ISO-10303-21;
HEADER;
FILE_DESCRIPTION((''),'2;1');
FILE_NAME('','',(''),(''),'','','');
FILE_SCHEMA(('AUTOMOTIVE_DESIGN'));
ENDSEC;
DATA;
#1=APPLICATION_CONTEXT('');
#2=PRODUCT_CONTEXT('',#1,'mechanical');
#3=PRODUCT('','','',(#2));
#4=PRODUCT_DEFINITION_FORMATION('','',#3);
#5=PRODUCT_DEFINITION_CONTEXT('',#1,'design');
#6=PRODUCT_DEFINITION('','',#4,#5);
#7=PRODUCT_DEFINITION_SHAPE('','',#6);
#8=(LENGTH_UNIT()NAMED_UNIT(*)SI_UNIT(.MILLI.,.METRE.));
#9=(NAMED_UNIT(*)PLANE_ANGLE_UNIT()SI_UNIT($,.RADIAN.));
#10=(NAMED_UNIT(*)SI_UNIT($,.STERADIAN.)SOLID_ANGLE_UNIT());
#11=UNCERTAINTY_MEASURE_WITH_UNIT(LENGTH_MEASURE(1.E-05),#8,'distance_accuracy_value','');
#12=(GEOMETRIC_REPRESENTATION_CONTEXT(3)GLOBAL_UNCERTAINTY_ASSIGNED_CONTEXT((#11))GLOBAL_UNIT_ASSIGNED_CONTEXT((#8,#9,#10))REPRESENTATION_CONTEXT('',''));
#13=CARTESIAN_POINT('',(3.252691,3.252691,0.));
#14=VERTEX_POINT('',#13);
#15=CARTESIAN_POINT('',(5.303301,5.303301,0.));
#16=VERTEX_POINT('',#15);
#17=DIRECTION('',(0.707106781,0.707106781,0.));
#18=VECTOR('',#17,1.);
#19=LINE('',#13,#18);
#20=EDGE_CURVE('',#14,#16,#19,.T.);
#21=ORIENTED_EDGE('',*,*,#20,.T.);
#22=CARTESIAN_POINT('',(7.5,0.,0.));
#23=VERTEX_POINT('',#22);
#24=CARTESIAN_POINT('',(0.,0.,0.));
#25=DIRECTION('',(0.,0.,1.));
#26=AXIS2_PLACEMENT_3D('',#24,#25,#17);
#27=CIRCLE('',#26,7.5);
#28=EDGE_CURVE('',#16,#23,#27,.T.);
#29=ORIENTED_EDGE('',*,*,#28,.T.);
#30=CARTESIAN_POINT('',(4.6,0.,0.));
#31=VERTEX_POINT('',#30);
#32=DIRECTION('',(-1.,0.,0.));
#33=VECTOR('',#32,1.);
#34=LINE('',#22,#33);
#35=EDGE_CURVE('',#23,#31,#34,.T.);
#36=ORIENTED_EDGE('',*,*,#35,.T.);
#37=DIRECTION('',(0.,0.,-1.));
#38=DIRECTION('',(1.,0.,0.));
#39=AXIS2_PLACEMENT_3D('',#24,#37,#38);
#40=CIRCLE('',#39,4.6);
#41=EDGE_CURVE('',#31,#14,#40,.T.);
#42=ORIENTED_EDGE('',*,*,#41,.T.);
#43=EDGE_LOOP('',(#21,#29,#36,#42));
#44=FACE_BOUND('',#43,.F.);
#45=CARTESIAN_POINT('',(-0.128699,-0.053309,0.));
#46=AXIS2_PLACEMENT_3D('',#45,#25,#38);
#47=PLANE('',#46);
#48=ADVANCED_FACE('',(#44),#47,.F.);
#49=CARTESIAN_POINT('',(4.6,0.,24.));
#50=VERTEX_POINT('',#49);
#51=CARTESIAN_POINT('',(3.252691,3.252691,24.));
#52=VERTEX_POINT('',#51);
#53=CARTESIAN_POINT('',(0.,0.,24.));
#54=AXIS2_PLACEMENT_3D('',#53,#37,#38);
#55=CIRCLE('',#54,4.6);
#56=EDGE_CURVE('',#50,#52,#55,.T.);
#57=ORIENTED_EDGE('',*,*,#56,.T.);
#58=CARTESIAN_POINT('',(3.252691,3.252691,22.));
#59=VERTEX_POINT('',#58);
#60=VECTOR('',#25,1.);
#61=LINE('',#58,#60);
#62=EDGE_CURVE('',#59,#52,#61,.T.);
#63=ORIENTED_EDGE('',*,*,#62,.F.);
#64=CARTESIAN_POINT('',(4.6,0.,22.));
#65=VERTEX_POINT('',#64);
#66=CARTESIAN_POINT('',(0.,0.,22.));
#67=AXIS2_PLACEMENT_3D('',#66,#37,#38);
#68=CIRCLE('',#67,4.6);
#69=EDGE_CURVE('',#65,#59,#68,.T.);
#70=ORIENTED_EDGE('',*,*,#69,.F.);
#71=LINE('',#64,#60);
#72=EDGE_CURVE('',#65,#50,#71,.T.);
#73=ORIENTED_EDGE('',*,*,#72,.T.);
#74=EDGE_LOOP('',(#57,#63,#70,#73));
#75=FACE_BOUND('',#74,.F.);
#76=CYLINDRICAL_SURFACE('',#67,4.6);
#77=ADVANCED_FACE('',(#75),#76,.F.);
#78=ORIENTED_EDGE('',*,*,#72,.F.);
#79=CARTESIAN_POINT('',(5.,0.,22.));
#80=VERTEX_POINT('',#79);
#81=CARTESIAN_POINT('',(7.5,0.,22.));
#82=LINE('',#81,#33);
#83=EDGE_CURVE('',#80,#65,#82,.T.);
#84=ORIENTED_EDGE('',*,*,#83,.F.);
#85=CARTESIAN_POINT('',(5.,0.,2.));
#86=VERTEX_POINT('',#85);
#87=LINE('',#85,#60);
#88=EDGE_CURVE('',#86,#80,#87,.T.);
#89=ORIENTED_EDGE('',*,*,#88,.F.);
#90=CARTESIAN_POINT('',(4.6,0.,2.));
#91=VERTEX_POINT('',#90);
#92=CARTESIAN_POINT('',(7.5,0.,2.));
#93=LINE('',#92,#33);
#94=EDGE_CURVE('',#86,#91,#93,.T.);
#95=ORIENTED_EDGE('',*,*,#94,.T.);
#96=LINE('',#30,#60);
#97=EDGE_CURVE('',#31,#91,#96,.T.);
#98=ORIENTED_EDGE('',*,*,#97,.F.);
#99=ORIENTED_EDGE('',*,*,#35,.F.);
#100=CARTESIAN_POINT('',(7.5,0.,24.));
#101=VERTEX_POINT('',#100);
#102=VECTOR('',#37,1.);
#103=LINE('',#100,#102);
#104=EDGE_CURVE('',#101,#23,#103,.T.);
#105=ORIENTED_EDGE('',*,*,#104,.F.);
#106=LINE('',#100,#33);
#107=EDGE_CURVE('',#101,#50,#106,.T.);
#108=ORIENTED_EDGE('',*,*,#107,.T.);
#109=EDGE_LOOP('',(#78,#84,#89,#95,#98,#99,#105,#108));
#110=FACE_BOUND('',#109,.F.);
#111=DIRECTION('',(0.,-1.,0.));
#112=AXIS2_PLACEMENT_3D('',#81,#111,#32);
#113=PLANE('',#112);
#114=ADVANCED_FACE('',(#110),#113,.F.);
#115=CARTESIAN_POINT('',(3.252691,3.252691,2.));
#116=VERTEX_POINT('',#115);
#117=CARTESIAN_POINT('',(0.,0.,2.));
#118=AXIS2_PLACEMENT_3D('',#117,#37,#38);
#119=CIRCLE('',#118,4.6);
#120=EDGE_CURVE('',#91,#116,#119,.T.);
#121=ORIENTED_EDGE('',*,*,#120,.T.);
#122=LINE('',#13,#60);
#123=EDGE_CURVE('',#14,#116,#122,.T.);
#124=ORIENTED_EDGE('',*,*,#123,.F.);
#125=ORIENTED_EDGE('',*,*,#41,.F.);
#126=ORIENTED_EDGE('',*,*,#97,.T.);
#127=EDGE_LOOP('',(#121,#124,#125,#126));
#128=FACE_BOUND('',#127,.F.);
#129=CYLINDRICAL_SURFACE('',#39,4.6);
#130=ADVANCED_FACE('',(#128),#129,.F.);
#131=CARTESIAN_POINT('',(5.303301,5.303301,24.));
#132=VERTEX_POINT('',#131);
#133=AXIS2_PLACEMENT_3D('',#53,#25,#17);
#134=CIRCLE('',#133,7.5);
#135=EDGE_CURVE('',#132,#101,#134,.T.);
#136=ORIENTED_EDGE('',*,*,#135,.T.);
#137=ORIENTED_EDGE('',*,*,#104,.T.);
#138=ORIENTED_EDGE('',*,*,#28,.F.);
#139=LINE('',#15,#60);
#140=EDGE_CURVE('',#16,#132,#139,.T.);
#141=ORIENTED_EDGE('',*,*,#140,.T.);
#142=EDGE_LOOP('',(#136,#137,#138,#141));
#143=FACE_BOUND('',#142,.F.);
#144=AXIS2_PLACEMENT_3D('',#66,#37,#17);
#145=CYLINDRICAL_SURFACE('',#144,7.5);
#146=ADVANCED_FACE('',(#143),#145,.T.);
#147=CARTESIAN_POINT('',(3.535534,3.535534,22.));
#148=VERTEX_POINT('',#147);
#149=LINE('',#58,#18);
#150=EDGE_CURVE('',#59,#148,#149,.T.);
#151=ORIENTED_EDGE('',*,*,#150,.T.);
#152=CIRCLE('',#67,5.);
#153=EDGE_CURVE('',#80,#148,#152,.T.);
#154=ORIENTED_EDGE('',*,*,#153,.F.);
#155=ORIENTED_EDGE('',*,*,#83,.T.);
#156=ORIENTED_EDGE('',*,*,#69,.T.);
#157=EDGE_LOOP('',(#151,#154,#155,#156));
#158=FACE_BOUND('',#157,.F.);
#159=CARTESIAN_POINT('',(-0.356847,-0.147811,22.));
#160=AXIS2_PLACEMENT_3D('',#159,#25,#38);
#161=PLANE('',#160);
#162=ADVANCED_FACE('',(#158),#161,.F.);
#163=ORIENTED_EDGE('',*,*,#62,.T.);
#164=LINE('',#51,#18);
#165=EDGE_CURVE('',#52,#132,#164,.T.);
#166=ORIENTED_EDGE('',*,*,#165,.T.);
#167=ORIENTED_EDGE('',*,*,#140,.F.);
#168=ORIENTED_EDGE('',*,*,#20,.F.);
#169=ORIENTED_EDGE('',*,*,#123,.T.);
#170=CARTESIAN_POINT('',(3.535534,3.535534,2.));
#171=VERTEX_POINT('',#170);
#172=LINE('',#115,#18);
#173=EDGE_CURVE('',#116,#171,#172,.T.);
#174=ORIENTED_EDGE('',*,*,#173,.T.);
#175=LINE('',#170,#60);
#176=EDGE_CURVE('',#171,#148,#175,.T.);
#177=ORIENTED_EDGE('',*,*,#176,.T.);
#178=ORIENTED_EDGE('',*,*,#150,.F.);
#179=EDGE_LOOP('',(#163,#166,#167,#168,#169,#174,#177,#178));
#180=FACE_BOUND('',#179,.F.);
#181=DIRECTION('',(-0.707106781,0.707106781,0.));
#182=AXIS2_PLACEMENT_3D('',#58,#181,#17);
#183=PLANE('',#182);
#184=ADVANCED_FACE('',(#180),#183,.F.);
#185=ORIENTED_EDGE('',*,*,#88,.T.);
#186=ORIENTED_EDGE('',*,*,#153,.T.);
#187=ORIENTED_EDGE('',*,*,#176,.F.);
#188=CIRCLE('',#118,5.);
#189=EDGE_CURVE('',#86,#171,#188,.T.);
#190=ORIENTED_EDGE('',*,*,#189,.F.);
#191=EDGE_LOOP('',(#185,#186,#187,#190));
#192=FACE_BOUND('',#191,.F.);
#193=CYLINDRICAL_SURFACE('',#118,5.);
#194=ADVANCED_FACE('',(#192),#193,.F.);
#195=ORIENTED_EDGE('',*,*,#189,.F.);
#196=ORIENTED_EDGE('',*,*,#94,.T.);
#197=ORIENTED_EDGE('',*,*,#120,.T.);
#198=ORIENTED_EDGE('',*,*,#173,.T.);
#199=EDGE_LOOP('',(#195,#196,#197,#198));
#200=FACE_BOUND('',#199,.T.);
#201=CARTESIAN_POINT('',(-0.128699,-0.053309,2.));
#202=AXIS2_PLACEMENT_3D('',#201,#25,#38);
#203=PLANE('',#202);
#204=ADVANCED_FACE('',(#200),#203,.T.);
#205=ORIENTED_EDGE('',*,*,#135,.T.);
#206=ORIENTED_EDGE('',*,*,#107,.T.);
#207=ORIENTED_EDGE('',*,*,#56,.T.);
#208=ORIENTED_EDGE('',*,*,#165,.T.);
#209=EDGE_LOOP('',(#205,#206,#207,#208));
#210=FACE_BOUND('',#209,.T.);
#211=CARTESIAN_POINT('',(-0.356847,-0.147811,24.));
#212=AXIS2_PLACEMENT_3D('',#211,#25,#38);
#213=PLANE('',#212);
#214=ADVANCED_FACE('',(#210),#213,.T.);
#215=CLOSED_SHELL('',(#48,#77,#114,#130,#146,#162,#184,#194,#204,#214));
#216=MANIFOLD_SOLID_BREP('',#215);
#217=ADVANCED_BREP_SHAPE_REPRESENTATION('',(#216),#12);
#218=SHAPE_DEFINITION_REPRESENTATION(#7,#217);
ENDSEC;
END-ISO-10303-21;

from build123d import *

# Parameters (mm, degrees)
F1_DEPTH = 2
F3_DEPTH = 20
F5_DEPTH = 2


with BuildPart() as f1:
    # F0 (on Top) → F1 (new body)
    with BuildSketch(Plane.XY):
        with BuildLine():
            ThreePointArc((5.3033008589, 5.3033008589), (-6.9290964938, -2.8701257427), (7.5, 0))
            Line((7.5, 0), (5, 0))
            ThreePointArc((5, 0), (-4.6193976626, -1.9134171618), (3.5355339059, 3.5355339059))
            Line((3.5355339059, 3.5355339059), (5.3033008589, 5.3033008589))
        make_face()
        with BuildLine():
            ThreePointArc((3.5355339059, 3.5355339059), (-4.6193976626, -1.9134171618), (5, 0))
            Line((5, 0), (4.6, 0))
            ThreePointArc((4.6, 0), (-4.2498458496, -1.7603437889), (3.2526911935, 3.2526911935))
            Line((3.2526911935, 3.2526911935), (3.5355339059, 3.5355339059))
        make_face()
    extrude(amount=F1_DEPTH)

    # F2 (on face) → F3 (join)
    with BuildSketch(Plane.XY.offset(2)):
        with BuildLine():
            Line((7.5, 0), (5, 0))
            ThreePointArc((5, 0), (-4.6193976626, -1.9134171618), (3.5355339059, 3.5355339059))
            Line((3.5355339059, 3.5355339059), (5.3033008589, 5.3033008589))
            ThreePointArc((5.3033008589, 5.3033008589), (-6.9290964938, -2.8701257427), (7.5, 0))
        make_face()
    extrude(amount=F3_DEPTH)

    # F4 (on face) → F5 (join)
    with BuildSketch(Plane.XY.offset(22)):
        with BuildLine():
            ThreePointArc((3.5355339059, 3.5355339059), (-4.6193976626, -1.9134171618), (5, 0))
            Line((5, 0), (4.6, 0))
            ThreePointArc((4.6, 0), (-4.2498458496, -1.7603437889), (3.2526911935, 3.2526911935))
            Line((3.2526911935, 3.2526911935), (3.5355339059, 3.5355339059))
        make_face()
        with BuildLine():
            ThreePointArc((5.3033008589, 5.3033008589), (-6.9290964938, -2.8701257427), (7.5, 0))
            Line((7.5, 0), (5, 0))
            ThreePointArc((5, 0), (-4.6193976626, -1.9134171618), (3.5355339059, 3.5355339059))
            Line((3.5355339059, 3.5355339059), (5.3033008589, 5.3033008589))
        make_face()
    extrude(amount=F5_DEPTH)


solid = f1.part
